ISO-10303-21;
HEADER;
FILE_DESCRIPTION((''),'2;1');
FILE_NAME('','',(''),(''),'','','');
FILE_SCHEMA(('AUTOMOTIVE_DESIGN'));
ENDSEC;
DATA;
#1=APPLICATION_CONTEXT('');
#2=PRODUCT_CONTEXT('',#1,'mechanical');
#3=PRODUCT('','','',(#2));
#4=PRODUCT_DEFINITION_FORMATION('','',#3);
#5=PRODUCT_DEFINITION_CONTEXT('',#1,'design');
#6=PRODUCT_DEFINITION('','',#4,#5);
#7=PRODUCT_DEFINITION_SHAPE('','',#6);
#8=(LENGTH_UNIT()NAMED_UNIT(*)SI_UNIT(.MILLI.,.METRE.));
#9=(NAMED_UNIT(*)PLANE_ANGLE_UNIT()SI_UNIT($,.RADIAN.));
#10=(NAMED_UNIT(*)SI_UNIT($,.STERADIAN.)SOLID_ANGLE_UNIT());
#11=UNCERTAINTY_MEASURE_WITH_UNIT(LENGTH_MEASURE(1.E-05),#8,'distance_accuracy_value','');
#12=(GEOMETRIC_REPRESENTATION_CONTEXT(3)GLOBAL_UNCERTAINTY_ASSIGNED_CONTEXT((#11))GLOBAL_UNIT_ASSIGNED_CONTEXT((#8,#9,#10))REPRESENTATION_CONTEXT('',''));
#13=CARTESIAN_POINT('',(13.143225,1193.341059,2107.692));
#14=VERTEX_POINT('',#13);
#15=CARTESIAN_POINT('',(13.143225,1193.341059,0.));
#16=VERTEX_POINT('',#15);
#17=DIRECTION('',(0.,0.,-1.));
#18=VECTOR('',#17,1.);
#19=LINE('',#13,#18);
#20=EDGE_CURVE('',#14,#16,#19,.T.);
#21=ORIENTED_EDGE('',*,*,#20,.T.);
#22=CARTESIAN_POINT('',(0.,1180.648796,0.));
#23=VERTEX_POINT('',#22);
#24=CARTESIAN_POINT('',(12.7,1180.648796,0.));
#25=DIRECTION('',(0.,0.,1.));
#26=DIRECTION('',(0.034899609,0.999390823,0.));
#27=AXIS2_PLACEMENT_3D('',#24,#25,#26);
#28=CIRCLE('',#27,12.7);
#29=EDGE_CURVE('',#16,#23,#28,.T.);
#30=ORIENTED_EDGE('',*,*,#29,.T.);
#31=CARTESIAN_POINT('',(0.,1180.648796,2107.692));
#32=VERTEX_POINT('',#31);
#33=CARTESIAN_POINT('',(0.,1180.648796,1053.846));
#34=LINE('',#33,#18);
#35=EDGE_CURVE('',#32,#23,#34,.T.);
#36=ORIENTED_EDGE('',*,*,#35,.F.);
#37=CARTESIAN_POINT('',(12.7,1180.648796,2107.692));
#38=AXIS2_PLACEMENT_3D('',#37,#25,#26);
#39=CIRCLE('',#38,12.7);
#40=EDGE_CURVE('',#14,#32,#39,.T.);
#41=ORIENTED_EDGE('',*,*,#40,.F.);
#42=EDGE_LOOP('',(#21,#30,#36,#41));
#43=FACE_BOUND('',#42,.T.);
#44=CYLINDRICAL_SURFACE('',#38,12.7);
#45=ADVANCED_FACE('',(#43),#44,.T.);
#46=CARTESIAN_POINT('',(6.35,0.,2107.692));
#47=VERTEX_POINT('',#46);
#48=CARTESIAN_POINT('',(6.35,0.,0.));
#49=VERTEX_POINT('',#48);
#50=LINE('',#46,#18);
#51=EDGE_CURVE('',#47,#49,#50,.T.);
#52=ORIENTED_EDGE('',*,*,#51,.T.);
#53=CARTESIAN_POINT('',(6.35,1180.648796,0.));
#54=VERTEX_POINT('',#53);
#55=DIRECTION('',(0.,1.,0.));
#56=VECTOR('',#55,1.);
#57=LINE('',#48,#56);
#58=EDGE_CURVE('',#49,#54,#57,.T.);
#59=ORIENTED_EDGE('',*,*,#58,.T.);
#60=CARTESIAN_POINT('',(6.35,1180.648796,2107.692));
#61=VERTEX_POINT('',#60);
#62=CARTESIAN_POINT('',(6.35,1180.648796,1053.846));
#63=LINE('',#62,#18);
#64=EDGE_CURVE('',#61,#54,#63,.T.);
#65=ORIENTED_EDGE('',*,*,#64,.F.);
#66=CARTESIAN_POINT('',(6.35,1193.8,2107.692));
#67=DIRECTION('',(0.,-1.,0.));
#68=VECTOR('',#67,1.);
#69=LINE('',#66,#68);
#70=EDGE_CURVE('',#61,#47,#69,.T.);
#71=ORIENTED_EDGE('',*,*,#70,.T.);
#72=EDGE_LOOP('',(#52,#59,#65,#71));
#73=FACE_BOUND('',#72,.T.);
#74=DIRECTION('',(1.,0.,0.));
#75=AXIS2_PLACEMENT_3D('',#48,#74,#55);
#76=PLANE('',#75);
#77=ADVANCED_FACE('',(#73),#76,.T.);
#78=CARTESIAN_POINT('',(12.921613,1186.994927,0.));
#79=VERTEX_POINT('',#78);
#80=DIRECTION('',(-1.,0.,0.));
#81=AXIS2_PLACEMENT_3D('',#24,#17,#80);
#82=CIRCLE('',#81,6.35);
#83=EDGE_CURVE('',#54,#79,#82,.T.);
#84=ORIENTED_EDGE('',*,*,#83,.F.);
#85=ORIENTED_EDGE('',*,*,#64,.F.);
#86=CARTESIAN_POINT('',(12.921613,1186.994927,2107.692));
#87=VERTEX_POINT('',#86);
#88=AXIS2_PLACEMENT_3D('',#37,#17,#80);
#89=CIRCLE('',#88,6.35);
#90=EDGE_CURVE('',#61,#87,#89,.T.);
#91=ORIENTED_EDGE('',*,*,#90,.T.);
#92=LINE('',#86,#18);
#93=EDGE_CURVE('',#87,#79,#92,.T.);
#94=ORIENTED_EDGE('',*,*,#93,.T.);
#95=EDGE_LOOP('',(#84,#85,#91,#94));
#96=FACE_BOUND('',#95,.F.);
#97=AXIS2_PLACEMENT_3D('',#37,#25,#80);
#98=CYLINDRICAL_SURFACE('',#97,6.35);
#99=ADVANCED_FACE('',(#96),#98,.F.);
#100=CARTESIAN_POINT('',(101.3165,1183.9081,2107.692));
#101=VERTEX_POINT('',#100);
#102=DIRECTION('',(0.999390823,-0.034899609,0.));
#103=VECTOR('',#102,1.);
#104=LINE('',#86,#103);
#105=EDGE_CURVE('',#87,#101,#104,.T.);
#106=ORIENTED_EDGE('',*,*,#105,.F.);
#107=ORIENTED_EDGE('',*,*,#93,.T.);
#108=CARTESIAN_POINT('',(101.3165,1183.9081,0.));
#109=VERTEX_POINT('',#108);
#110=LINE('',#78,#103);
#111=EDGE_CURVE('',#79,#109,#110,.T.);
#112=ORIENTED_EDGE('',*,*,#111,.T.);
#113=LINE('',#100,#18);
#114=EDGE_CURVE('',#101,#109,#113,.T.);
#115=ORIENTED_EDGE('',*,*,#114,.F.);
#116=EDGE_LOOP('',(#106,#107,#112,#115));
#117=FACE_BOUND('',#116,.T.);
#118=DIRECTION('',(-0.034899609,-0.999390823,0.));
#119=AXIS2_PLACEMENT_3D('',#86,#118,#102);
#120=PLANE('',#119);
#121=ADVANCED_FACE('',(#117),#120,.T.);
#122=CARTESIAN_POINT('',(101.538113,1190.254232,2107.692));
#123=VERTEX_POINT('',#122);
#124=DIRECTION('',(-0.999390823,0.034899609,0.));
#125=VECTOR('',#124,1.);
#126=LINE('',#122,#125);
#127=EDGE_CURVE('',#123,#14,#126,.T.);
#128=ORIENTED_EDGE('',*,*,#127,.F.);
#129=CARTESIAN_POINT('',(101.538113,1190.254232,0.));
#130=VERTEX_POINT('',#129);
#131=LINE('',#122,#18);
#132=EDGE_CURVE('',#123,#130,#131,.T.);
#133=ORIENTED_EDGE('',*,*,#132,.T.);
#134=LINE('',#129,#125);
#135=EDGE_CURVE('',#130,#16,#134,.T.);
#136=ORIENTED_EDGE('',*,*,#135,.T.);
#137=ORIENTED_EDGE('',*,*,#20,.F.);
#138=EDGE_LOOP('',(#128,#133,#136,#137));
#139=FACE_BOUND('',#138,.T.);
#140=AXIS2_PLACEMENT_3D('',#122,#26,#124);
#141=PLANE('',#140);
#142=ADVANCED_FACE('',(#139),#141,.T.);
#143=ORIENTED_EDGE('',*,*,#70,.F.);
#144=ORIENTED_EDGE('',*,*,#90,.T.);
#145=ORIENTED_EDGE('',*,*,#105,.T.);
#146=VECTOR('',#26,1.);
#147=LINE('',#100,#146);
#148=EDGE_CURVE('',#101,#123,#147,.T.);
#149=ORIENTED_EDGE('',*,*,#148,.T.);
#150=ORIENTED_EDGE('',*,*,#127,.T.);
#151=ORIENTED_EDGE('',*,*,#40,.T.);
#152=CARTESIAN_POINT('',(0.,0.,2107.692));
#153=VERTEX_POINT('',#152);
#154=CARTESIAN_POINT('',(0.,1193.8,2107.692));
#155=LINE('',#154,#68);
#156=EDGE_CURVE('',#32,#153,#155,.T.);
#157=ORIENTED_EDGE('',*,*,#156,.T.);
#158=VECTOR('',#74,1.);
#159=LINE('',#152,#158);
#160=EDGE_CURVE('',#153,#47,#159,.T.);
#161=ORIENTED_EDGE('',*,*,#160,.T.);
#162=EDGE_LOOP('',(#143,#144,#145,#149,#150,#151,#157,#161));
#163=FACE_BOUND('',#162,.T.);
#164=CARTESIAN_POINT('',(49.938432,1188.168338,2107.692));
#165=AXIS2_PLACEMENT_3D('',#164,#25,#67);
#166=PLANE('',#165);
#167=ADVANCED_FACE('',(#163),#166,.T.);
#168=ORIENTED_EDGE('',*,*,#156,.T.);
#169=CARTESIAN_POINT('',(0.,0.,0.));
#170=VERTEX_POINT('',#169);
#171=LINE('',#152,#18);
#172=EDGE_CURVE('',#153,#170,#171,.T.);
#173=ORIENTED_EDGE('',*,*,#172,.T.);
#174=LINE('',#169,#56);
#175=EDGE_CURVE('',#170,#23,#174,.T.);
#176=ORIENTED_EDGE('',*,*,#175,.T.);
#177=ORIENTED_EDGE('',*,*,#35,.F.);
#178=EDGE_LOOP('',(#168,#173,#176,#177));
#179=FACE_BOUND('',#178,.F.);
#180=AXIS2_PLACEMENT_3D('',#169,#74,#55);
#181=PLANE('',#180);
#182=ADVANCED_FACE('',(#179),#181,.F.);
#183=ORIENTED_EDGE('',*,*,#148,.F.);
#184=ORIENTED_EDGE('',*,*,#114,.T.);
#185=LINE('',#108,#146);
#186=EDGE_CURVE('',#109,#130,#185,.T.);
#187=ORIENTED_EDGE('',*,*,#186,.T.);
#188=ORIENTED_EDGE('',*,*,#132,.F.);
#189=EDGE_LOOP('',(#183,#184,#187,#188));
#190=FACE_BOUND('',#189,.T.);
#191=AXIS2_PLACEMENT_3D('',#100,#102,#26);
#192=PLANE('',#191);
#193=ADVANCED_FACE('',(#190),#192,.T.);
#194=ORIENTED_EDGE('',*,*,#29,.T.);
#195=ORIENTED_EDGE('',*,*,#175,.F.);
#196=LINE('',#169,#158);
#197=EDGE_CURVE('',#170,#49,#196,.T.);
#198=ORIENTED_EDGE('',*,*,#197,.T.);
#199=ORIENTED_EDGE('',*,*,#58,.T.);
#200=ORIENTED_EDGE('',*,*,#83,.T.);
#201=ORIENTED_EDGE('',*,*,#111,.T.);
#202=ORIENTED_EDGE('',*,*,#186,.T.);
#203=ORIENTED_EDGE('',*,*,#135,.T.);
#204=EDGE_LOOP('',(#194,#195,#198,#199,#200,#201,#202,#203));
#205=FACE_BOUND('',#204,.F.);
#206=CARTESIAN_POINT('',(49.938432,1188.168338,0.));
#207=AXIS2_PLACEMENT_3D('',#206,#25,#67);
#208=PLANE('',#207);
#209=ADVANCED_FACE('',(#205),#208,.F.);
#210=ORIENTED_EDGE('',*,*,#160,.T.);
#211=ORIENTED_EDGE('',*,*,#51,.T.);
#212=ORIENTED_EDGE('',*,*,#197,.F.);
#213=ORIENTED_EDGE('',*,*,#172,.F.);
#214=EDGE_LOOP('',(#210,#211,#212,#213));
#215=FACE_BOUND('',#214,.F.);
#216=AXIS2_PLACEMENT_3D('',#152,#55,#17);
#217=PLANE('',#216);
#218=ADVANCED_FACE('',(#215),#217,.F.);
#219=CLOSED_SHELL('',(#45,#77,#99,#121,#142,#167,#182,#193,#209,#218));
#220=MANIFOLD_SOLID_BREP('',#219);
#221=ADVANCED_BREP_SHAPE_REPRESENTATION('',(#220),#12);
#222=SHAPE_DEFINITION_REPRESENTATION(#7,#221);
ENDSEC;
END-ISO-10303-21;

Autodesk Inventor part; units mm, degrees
ref_plane "YZ Plane" through (0, 0, 0) normal (1, 0, 0) x (0, 1, 0)
ref_plane "XZ Plane" through (0, 0, 0) normal (0, 1, 0) x (-1, 0, 0)
ref_plane "XY Plane" through (0, 0, 0) normal (0, 0, 1) x (1, 0, 0)
sketch "Sketch29" plane through (0, 0, 0) normal (1, 0, 0) x (0, 1, 0)
  line L0 (0, 0) -> (1193.8, 0)
  line L1 (1193.8, 0) -> (1193.8, 2107.692)
  line L2 (1193.8, 2107.692) -> (0, 2107.692)
  line L3 (0, 2107.692) -> (0, 0)
  dimension "d230" = 2107.692
  dimension "d231" = 1193.8
extrude "Plate26" add sketch "Sketch29" along normal blind 6.35
sketch "Sketch30" plane through (-0.2216, 1187.4539, 2107.692) normal (0.0348995, 0.9993908, 0) x (-0.9993908, 0.0348995, 0)
  line L0 (0, -2107.692) -> (0, 0)
  line L1 (0, 0) -> (-101.6, 0)
  line L2 (-101.6, 0) -> (-101.6, -2107.692)
  line L3 (-101.6, -2107.692) -> (0, -2107.692)
edge flange "Flange23" height 101.6 angle 92 thickness 6.35 bend radius 6.35 thickness toward (0.0348995, 0.9993908, 0) relief tear relief width 6.35 relief depth 3.175 edges at (6.35, 1193.8, 1053.846) wall of the first edge with corners at (-0.2216, 1187.4539, 0) (-0.2216, 1187.4539, 2107.692) (101.3165, 1183.9081, 2107.692) (101.3165, 1183.9081, 0)
bend "Bend23"
corner "Corner22"
equation "\"d230\" = LARGO"
equation "\"d231\" = ALTO"
equation "\"d237\" = LARGOF"
equation "\"d238\" = ANGULOF"
equation "\"BendRadius\" = Thickness"
equation "\"BendReliefWidth\" = Thickness"
equation "\"BendReliefDepth\" = 0.5 * Thickness"
equation "\"CornerReliefSize\" = 4 * Thickness"
equation "\"MinimumRemnant\" = 2 * Thickness"
equation "\"TransitionRadius\" = BendRadius"
equation "\"JacobiRadiusSize\" = BendRadius"
equation "\"GapSize\" = Thickness"
equation "\"LARGO\" = 2107.692"
equation "\"ALTO\" = 1193.8"
equation "\"LARGOF\" = 101.6"
equation "\"ANGULOF\" = 92deg"
properties part number "BackWallTop" material "Carbon Steel - A36"
